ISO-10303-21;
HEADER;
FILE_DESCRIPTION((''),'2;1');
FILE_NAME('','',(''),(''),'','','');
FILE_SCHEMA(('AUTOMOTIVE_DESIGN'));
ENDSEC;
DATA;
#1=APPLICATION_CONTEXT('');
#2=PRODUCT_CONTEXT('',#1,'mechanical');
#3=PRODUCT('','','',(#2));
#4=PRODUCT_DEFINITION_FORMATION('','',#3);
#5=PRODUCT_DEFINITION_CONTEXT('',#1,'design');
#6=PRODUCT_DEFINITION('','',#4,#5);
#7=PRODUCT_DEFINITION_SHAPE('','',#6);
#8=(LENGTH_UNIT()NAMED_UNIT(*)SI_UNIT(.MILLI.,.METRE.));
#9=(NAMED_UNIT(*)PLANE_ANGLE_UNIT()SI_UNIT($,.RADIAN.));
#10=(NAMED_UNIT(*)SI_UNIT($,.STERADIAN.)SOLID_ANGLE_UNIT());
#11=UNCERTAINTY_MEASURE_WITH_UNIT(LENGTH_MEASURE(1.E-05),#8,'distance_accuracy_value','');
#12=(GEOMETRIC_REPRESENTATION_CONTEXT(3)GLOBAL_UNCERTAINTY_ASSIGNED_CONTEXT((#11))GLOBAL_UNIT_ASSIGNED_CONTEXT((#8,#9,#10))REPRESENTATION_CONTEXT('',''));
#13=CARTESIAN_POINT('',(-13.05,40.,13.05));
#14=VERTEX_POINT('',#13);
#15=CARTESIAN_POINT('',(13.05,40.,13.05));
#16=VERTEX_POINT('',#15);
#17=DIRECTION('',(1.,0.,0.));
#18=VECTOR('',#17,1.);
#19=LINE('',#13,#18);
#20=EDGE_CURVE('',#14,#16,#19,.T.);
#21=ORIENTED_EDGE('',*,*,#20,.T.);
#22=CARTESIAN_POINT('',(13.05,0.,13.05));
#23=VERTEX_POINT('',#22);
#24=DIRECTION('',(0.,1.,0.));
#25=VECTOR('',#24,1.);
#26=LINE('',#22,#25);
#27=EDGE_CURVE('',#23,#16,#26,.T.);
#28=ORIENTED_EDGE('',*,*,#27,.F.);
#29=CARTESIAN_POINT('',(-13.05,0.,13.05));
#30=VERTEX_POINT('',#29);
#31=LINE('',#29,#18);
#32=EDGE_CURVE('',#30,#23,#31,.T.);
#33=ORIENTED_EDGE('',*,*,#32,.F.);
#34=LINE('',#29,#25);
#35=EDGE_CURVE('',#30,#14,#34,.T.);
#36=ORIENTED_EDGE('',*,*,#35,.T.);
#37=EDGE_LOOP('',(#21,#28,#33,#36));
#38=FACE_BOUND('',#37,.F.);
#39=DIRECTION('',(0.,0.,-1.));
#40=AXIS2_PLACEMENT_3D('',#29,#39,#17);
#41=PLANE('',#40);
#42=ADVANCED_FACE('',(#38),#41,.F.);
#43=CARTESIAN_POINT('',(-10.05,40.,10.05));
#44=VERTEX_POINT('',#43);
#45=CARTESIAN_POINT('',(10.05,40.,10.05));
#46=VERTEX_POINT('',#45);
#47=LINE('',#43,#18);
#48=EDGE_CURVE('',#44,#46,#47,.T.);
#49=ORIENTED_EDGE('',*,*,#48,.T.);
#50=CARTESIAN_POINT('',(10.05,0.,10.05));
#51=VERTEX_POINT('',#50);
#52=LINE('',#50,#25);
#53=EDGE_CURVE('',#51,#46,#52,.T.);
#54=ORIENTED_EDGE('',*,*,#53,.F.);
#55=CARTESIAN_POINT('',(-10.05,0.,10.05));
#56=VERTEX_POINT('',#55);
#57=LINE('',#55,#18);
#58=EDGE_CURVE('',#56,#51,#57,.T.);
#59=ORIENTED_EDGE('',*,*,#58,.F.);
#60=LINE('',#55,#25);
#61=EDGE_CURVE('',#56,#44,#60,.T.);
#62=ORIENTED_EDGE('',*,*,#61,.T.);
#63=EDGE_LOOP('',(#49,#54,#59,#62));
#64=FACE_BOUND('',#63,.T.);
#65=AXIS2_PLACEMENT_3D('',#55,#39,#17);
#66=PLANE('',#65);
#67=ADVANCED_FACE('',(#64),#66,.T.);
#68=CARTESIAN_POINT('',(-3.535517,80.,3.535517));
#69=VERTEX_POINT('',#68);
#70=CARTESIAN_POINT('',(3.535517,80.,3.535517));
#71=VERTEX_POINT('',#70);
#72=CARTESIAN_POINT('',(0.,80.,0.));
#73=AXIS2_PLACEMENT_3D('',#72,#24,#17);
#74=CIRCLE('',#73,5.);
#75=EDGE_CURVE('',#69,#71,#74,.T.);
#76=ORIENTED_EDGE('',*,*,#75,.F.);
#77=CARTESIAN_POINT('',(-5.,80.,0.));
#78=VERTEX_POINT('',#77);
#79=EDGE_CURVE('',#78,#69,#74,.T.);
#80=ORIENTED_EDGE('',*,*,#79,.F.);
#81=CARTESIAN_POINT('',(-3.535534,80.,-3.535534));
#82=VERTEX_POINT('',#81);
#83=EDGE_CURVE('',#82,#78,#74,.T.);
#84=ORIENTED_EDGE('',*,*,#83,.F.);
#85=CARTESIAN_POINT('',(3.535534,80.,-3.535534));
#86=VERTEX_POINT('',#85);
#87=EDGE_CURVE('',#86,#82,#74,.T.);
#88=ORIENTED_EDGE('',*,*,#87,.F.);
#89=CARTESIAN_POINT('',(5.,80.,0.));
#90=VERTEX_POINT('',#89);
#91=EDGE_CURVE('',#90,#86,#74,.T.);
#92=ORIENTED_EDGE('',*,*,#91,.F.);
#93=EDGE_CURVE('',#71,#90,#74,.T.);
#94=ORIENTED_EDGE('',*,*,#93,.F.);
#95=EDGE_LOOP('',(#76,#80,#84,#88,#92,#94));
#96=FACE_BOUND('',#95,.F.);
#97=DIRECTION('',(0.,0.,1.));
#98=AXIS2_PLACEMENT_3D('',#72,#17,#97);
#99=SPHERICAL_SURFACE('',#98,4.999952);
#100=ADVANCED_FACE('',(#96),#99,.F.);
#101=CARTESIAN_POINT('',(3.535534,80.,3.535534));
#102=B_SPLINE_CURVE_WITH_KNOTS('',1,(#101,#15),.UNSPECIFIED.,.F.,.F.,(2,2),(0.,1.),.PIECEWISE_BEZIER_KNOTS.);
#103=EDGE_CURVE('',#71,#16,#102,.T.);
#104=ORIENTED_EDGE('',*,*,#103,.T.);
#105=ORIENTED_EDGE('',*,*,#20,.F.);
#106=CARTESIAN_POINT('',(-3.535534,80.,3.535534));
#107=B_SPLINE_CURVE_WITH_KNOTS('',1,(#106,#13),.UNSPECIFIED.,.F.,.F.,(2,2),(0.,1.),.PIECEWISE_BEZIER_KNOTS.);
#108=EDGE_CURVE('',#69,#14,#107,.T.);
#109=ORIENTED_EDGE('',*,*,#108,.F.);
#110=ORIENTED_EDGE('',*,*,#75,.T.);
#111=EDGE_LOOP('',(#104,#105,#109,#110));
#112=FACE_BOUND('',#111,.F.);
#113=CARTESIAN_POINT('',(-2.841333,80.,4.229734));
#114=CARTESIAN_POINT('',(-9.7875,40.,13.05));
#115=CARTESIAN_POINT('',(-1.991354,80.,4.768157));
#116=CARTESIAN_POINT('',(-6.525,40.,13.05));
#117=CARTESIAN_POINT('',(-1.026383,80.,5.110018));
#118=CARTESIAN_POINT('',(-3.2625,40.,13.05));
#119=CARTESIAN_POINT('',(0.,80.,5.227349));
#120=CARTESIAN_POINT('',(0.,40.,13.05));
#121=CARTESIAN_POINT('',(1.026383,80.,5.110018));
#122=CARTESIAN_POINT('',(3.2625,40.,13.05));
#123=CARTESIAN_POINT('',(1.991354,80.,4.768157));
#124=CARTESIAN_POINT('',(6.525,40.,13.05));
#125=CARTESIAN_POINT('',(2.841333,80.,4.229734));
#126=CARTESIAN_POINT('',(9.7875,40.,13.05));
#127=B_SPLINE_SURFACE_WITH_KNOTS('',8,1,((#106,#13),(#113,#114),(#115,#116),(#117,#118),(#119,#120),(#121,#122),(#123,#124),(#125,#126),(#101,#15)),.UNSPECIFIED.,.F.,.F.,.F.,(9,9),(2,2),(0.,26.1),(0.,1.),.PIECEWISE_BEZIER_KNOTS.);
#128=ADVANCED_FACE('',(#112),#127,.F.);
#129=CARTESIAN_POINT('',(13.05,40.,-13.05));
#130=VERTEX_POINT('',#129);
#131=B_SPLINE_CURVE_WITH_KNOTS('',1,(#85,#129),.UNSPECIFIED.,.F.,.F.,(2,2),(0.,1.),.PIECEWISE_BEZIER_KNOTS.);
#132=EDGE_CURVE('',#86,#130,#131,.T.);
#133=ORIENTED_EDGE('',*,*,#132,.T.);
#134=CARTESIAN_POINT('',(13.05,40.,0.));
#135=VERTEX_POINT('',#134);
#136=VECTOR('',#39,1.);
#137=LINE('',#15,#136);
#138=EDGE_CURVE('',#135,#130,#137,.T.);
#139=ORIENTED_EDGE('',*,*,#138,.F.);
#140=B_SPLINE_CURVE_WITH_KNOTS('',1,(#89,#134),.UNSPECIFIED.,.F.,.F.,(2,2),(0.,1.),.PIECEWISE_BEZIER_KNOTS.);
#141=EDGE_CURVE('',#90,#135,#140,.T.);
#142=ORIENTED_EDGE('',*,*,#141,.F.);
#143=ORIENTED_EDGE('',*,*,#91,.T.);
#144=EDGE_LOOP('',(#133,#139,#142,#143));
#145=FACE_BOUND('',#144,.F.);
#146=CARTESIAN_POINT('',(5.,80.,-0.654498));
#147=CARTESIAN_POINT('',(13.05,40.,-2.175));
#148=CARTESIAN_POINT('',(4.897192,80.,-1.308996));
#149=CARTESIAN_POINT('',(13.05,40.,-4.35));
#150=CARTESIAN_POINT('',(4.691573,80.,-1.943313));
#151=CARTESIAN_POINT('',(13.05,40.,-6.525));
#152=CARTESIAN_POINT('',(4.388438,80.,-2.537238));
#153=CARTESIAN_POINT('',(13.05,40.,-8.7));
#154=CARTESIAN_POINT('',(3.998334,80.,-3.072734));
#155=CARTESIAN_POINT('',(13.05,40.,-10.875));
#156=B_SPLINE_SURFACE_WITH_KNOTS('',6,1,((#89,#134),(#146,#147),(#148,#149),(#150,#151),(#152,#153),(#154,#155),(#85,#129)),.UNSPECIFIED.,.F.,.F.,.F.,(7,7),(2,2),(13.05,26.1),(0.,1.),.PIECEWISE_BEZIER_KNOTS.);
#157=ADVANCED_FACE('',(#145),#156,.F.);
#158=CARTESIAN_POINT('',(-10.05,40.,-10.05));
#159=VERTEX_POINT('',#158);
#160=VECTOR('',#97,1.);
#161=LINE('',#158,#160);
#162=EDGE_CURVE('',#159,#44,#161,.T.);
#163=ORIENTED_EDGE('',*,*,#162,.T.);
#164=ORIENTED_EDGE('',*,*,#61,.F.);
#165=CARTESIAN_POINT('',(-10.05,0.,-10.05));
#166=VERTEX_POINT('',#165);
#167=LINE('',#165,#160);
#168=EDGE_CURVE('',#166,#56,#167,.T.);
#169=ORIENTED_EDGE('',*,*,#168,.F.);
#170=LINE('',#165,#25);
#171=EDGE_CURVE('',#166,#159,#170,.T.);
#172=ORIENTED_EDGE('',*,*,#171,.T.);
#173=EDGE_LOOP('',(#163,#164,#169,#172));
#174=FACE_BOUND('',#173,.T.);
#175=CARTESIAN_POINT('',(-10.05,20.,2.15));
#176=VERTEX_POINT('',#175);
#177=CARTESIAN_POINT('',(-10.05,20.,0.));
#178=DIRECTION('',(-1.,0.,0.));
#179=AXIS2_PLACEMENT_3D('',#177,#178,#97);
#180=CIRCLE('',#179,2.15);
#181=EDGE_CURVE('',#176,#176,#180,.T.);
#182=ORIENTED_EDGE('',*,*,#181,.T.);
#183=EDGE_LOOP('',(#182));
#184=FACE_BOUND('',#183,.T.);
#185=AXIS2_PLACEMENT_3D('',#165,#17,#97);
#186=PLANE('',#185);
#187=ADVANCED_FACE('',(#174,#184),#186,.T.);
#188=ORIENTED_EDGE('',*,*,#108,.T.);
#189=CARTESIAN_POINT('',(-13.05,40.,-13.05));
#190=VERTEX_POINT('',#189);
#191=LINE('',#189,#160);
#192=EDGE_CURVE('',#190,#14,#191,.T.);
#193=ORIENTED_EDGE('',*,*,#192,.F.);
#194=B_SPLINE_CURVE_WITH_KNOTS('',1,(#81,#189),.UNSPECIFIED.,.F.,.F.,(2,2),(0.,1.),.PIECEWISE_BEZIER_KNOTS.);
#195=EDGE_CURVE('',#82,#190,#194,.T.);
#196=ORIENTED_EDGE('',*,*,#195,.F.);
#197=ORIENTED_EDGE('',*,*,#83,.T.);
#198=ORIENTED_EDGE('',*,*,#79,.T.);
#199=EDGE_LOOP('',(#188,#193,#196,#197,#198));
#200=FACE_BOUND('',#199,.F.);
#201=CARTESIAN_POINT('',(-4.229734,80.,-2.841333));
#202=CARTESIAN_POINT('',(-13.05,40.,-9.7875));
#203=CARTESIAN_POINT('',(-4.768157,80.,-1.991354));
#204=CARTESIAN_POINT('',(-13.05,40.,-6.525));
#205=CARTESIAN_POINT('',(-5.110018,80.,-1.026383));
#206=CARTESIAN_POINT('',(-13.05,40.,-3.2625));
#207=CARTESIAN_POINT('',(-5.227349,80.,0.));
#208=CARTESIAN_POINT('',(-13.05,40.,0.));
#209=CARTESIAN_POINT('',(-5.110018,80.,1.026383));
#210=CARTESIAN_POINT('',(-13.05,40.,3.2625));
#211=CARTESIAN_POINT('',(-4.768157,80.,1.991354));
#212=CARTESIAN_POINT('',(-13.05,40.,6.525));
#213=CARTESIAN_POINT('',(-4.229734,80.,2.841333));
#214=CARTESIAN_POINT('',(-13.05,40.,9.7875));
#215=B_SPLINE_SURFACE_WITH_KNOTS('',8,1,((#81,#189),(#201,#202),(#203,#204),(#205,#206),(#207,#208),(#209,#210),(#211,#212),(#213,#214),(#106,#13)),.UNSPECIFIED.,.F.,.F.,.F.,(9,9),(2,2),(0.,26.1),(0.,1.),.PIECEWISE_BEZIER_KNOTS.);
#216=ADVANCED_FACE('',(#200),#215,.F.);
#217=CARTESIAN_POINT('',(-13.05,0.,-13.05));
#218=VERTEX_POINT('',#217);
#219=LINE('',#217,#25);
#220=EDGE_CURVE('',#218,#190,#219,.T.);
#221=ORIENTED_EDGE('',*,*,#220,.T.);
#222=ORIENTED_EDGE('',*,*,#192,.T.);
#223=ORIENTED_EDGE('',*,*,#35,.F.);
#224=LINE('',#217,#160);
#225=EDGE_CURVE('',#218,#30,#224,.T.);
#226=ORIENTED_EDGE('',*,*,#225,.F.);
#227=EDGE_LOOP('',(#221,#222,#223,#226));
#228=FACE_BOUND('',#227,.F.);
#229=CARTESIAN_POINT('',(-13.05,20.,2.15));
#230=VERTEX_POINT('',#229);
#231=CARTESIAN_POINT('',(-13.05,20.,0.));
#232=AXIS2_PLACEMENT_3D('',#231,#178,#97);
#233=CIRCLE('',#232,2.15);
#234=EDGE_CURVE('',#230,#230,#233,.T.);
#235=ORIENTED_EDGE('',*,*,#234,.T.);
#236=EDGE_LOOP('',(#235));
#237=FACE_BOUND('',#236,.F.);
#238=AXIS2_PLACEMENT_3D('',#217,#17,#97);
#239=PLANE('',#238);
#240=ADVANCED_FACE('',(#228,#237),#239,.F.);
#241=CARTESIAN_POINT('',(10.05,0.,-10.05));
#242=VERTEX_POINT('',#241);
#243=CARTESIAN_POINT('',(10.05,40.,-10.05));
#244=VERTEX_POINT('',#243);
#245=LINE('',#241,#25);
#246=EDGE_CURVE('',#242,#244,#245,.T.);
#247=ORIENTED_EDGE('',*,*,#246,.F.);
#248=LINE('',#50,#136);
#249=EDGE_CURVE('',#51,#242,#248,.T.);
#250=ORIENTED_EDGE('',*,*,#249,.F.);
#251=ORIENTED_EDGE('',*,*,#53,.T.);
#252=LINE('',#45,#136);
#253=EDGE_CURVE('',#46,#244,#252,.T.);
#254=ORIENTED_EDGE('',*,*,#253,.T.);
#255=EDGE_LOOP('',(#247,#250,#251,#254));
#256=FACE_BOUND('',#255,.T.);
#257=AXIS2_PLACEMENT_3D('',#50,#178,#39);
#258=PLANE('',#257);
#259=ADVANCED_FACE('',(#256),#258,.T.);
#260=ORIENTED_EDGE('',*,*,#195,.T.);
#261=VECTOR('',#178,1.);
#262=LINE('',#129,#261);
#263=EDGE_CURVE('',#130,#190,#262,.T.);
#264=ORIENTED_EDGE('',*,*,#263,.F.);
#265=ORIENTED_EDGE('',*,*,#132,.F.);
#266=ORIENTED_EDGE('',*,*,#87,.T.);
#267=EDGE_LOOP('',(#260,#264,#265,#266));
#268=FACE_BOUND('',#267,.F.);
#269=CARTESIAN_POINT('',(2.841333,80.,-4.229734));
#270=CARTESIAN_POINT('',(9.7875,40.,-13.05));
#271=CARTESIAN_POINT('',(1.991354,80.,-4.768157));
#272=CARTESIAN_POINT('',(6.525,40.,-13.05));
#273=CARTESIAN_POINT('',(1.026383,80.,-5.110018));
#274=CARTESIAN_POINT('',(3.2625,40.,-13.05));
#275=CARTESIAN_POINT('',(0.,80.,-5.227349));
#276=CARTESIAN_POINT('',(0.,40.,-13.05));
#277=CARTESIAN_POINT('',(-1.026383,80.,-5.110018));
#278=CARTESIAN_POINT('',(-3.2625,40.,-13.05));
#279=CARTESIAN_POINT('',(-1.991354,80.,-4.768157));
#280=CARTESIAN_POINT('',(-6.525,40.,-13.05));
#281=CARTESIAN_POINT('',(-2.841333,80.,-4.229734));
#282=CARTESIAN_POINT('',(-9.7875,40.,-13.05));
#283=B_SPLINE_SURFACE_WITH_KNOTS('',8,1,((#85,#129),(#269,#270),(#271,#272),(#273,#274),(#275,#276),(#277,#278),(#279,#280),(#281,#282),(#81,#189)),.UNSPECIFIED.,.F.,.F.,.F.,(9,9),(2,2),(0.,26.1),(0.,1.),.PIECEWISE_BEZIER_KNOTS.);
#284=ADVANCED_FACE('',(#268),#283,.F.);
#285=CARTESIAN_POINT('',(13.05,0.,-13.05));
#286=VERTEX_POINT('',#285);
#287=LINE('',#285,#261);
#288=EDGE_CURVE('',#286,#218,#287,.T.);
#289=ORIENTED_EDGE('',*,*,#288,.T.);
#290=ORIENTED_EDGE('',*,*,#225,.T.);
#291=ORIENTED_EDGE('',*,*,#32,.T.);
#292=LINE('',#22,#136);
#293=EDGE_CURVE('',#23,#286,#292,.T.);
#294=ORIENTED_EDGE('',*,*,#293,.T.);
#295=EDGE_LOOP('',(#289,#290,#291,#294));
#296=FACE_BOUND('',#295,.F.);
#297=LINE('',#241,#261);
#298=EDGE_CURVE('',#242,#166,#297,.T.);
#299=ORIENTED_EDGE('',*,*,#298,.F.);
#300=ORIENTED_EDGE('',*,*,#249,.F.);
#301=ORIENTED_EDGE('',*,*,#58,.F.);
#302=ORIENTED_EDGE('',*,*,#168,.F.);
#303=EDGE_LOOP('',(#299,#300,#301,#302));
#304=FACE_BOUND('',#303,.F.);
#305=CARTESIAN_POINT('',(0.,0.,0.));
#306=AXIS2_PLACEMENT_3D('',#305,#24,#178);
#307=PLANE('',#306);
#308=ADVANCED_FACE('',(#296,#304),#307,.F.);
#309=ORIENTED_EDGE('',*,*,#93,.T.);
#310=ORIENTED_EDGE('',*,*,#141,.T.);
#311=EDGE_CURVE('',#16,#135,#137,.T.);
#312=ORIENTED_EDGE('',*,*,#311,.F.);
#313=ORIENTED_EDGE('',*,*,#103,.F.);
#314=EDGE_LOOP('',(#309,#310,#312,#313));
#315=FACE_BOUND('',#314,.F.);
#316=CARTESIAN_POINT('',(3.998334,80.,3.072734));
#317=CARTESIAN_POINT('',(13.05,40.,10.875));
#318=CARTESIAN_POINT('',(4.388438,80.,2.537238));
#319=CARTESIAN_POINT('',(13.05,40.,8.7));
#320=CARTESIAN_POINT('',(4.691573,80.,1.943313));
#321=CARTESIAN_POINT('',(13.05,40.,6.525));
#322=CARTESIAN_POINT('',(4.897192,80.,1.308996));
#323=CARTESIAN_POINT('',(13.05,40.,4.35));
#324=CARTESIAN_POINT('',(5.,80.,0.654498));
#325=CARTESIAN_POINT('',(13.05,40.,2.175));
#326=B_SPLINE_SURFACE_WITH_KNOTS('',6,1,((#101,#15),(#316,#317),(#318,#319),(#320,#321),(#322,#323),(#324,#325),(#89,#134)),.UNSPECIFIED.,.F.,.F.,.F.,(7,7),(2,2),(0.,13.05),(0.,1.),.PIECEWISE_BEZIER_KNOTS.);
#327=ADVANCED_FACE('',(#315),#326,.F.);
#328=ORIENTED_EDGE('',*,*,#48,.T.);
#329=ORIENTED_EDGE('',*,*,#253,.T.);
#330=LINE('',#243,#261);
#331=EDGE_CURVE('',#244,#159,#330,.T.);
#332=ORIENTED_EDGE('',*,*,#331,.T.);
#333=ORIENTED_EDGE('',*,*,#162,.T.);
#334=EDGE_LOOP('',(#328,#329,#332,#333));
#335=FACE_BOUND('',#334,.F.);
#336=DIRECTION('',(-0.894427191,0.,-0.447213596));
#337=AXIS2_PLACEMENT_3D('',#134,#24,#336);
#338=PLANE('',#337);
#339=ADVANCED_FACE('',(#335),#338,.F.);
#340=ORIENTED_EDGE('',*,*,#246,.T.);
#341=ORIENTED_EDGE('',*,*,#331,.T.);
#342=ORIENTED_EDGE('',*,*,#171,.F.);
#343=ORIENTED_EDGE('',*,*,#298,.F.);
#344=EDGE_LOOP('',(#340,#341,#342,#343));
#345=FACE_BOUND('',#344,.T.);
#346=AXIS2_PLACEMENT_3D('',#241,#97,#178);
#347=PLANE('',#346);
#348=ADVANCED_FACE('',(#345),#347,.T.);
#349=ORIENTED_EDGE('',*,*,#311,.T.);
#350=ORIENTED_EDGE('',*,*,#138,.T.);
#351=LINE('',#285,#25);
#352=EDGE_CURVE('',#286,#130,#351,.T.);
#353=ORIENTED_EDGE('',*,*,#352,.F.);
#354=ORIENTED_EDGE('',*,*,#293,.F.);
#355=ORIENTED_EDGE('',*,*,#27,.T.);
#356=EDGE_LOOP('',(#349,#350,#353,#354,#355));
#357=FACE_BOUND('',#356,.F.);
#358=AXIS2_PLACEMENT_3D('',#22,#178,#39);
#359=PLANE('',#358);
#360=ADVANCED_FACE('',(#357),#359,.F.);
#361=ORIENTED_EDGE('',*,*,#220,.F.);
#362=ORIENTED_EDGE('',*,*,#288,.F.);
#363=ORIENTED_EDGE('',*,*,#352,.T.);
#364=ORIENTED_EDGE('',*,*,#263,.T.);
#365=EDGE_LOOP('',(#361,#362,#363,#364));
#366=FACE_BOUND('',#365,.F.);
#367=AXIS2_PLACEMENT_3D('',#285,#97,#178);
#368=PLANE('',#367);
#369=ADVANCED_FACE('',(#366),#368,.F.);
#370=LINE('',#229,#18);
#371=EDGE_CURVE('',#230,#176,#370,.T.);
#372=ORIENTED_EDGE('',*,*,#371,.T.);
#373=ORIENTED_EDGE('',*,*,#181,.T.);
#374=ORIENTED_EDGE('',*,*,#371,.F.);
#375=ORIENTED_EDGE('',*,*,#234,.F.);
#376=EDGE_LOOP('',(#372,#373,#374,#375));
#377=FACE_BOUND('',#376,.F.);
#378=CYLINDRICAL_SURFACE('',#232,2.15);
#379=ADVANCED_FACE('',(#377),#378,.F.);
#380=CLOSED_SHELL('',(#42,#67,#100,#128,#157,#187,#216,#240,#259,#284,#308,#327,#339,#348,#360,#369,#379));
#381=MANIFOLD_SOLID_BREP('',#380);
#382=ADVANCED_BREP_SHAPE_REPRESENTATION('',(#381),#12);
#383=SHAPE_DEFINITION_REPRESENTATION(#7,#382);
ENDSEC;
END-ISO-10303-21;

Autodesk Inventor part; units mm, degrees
ref_plane "YZ Plane" through (0, 0, 0) normal (1, 0, 0) x (0, 1, 0)
ref_plane "XZ Plane" through (0, 0, 0) normal (0, 1, 0) x (-1, 0, 0)
sketch "Sketch2" plane through (0, 0, 0) normal (0, 1, 0) x (-1, 0, 0)
  line L0 (10.05, 10.05) -> (-10.05, 10.05)
  line L1 (-10.05, 10.05) -> (-10.05, -10.05)
  line L2 (-10.05, -10.05) -> (10.05, -10.05)
  line L3 (10.05, -10.05) -> (10.05, 10.05)
  line L4 (10.05, 10.05) -> (-10.05, -10.05) construction
  line L5 (-10.05, 10.05) -> (10.05, -10.05) construction
  line L6 (13.05, 13.05) -> (-13.05, 13.05)
  line L7 (-13.05, 13.05) -> (-13.05, -13.05)
  line L8 (-13.05, -13.05) -> (13.05, -13.05)
  line L9 (13.05, -13.05) -> (13.05, 13.05)
  point P0 (0, 0)
  dimension "d19" = 20.1
  dimension "d20" = 3
extrude "Extrusion2" add sketch "Sketch2" along normal blind 40
ref_plane "Work Plane1" through (0, 80, 0) normal (0, 1, 0) x (1, 0, 0)
sketch "Sketch3" plane through (0, 80, 0) normal (0, 1, 0) x (1, 0, 0)
  line L0 (-10.05, -10.05) -> (-10.05, 10.05) projected
  line L1 (10.05, 10.05) -> (10.05, -10.05) projected
  line L2 (-10.05, -10.05) -> (10.05, 10.05) construction
  circle A0 centre (0, 0) radius 5
  dimension "d24" = 10
sketch "Sketch4" plane through (0, 40, 0) normal (0, 1, 0) x (1, 0, 0)
  line L0 (13.05, -13.05) -> (13.05, 13.05) projected
  line L1 (13.05, 13.05) -> (-13.05, 13.05) projected
  line L2 (-13.05, 13.05) -> (-13.05, -13.05) projected
  line L3 (-13.05, -13.05) -> (13.05, -13.05) projected
  line L4 (-10.05, -10.05) -> (-10.05, 10.05) construction
  line L5 (-10.05, 10.05) -> (10.05, 10.05) projected
  line L6 (10.05, 10.05) -> (10.05, -10.05) projected
  line L7 (10.05, -10.05) -> (-10.05, -10.05) projected
  point P0 (0, 0)
loft "Loft1" add profiles "Sketch3", "Sketch4"
sketch "Sketch5" plane through (0, 80, 0) normal (0, 1, 0) x (1, 0, 0)
  arc A0 (-3.5355, 3.5355) -> (-3.5355, -3.5355) centre (0, 0) ccw projected
  line L0 (-5, 0) -> (5, 0)
  arc A1 (3.5355, -3.5355) -> (3.5355, 3.5355) centre (0, 0) ccw projected
  arc A2 (-3.5355, -3.5355) -> (3.5355, -3.5355) centre (0, 0) ccw projected
  arc A3 (3.5355, -3.5355) -> (3.5355, 3.5355) centre (0, 0) ccw projected
  arc A4 (3.5355, 3.5355) -> (-3.5355, 3.5355) centre (0, 0) ccw projected
  arc A5 (-3.5355, 3.5355) -> (-3.5355, -3.5355) centre (0, 0) ccw projected
  point P0 (-3.5355, -3.5355)
revolve "Revolution1" add sketch "Sketch5" angle 360 about axis through (-5, 80, 0) along (1, 0, 0) contours L0 A1 A2 A0
sketch "Sketch6" plane through (-13.05, 0, -13.05) normal (-1, 0, 0) x (0, 0, 1)
  line L0 (9.5145, 80) -> (0, 40) projected
  line L1 (26.1, 0) -> (26.1, 40) projected
  line L2 (0, 40) -> (26.1, 0) construction
  circle A0 centre (13.05, 20) radius 2.15
  point P0 (13.05, 0)
  dimension "d30" = 4.3
extrude "Extrusion3" cut sketch "Sketch6" against normal blind 18.855
equation "\"l1\" = 1"
properties part number "Pies" material "PET Plastic"
